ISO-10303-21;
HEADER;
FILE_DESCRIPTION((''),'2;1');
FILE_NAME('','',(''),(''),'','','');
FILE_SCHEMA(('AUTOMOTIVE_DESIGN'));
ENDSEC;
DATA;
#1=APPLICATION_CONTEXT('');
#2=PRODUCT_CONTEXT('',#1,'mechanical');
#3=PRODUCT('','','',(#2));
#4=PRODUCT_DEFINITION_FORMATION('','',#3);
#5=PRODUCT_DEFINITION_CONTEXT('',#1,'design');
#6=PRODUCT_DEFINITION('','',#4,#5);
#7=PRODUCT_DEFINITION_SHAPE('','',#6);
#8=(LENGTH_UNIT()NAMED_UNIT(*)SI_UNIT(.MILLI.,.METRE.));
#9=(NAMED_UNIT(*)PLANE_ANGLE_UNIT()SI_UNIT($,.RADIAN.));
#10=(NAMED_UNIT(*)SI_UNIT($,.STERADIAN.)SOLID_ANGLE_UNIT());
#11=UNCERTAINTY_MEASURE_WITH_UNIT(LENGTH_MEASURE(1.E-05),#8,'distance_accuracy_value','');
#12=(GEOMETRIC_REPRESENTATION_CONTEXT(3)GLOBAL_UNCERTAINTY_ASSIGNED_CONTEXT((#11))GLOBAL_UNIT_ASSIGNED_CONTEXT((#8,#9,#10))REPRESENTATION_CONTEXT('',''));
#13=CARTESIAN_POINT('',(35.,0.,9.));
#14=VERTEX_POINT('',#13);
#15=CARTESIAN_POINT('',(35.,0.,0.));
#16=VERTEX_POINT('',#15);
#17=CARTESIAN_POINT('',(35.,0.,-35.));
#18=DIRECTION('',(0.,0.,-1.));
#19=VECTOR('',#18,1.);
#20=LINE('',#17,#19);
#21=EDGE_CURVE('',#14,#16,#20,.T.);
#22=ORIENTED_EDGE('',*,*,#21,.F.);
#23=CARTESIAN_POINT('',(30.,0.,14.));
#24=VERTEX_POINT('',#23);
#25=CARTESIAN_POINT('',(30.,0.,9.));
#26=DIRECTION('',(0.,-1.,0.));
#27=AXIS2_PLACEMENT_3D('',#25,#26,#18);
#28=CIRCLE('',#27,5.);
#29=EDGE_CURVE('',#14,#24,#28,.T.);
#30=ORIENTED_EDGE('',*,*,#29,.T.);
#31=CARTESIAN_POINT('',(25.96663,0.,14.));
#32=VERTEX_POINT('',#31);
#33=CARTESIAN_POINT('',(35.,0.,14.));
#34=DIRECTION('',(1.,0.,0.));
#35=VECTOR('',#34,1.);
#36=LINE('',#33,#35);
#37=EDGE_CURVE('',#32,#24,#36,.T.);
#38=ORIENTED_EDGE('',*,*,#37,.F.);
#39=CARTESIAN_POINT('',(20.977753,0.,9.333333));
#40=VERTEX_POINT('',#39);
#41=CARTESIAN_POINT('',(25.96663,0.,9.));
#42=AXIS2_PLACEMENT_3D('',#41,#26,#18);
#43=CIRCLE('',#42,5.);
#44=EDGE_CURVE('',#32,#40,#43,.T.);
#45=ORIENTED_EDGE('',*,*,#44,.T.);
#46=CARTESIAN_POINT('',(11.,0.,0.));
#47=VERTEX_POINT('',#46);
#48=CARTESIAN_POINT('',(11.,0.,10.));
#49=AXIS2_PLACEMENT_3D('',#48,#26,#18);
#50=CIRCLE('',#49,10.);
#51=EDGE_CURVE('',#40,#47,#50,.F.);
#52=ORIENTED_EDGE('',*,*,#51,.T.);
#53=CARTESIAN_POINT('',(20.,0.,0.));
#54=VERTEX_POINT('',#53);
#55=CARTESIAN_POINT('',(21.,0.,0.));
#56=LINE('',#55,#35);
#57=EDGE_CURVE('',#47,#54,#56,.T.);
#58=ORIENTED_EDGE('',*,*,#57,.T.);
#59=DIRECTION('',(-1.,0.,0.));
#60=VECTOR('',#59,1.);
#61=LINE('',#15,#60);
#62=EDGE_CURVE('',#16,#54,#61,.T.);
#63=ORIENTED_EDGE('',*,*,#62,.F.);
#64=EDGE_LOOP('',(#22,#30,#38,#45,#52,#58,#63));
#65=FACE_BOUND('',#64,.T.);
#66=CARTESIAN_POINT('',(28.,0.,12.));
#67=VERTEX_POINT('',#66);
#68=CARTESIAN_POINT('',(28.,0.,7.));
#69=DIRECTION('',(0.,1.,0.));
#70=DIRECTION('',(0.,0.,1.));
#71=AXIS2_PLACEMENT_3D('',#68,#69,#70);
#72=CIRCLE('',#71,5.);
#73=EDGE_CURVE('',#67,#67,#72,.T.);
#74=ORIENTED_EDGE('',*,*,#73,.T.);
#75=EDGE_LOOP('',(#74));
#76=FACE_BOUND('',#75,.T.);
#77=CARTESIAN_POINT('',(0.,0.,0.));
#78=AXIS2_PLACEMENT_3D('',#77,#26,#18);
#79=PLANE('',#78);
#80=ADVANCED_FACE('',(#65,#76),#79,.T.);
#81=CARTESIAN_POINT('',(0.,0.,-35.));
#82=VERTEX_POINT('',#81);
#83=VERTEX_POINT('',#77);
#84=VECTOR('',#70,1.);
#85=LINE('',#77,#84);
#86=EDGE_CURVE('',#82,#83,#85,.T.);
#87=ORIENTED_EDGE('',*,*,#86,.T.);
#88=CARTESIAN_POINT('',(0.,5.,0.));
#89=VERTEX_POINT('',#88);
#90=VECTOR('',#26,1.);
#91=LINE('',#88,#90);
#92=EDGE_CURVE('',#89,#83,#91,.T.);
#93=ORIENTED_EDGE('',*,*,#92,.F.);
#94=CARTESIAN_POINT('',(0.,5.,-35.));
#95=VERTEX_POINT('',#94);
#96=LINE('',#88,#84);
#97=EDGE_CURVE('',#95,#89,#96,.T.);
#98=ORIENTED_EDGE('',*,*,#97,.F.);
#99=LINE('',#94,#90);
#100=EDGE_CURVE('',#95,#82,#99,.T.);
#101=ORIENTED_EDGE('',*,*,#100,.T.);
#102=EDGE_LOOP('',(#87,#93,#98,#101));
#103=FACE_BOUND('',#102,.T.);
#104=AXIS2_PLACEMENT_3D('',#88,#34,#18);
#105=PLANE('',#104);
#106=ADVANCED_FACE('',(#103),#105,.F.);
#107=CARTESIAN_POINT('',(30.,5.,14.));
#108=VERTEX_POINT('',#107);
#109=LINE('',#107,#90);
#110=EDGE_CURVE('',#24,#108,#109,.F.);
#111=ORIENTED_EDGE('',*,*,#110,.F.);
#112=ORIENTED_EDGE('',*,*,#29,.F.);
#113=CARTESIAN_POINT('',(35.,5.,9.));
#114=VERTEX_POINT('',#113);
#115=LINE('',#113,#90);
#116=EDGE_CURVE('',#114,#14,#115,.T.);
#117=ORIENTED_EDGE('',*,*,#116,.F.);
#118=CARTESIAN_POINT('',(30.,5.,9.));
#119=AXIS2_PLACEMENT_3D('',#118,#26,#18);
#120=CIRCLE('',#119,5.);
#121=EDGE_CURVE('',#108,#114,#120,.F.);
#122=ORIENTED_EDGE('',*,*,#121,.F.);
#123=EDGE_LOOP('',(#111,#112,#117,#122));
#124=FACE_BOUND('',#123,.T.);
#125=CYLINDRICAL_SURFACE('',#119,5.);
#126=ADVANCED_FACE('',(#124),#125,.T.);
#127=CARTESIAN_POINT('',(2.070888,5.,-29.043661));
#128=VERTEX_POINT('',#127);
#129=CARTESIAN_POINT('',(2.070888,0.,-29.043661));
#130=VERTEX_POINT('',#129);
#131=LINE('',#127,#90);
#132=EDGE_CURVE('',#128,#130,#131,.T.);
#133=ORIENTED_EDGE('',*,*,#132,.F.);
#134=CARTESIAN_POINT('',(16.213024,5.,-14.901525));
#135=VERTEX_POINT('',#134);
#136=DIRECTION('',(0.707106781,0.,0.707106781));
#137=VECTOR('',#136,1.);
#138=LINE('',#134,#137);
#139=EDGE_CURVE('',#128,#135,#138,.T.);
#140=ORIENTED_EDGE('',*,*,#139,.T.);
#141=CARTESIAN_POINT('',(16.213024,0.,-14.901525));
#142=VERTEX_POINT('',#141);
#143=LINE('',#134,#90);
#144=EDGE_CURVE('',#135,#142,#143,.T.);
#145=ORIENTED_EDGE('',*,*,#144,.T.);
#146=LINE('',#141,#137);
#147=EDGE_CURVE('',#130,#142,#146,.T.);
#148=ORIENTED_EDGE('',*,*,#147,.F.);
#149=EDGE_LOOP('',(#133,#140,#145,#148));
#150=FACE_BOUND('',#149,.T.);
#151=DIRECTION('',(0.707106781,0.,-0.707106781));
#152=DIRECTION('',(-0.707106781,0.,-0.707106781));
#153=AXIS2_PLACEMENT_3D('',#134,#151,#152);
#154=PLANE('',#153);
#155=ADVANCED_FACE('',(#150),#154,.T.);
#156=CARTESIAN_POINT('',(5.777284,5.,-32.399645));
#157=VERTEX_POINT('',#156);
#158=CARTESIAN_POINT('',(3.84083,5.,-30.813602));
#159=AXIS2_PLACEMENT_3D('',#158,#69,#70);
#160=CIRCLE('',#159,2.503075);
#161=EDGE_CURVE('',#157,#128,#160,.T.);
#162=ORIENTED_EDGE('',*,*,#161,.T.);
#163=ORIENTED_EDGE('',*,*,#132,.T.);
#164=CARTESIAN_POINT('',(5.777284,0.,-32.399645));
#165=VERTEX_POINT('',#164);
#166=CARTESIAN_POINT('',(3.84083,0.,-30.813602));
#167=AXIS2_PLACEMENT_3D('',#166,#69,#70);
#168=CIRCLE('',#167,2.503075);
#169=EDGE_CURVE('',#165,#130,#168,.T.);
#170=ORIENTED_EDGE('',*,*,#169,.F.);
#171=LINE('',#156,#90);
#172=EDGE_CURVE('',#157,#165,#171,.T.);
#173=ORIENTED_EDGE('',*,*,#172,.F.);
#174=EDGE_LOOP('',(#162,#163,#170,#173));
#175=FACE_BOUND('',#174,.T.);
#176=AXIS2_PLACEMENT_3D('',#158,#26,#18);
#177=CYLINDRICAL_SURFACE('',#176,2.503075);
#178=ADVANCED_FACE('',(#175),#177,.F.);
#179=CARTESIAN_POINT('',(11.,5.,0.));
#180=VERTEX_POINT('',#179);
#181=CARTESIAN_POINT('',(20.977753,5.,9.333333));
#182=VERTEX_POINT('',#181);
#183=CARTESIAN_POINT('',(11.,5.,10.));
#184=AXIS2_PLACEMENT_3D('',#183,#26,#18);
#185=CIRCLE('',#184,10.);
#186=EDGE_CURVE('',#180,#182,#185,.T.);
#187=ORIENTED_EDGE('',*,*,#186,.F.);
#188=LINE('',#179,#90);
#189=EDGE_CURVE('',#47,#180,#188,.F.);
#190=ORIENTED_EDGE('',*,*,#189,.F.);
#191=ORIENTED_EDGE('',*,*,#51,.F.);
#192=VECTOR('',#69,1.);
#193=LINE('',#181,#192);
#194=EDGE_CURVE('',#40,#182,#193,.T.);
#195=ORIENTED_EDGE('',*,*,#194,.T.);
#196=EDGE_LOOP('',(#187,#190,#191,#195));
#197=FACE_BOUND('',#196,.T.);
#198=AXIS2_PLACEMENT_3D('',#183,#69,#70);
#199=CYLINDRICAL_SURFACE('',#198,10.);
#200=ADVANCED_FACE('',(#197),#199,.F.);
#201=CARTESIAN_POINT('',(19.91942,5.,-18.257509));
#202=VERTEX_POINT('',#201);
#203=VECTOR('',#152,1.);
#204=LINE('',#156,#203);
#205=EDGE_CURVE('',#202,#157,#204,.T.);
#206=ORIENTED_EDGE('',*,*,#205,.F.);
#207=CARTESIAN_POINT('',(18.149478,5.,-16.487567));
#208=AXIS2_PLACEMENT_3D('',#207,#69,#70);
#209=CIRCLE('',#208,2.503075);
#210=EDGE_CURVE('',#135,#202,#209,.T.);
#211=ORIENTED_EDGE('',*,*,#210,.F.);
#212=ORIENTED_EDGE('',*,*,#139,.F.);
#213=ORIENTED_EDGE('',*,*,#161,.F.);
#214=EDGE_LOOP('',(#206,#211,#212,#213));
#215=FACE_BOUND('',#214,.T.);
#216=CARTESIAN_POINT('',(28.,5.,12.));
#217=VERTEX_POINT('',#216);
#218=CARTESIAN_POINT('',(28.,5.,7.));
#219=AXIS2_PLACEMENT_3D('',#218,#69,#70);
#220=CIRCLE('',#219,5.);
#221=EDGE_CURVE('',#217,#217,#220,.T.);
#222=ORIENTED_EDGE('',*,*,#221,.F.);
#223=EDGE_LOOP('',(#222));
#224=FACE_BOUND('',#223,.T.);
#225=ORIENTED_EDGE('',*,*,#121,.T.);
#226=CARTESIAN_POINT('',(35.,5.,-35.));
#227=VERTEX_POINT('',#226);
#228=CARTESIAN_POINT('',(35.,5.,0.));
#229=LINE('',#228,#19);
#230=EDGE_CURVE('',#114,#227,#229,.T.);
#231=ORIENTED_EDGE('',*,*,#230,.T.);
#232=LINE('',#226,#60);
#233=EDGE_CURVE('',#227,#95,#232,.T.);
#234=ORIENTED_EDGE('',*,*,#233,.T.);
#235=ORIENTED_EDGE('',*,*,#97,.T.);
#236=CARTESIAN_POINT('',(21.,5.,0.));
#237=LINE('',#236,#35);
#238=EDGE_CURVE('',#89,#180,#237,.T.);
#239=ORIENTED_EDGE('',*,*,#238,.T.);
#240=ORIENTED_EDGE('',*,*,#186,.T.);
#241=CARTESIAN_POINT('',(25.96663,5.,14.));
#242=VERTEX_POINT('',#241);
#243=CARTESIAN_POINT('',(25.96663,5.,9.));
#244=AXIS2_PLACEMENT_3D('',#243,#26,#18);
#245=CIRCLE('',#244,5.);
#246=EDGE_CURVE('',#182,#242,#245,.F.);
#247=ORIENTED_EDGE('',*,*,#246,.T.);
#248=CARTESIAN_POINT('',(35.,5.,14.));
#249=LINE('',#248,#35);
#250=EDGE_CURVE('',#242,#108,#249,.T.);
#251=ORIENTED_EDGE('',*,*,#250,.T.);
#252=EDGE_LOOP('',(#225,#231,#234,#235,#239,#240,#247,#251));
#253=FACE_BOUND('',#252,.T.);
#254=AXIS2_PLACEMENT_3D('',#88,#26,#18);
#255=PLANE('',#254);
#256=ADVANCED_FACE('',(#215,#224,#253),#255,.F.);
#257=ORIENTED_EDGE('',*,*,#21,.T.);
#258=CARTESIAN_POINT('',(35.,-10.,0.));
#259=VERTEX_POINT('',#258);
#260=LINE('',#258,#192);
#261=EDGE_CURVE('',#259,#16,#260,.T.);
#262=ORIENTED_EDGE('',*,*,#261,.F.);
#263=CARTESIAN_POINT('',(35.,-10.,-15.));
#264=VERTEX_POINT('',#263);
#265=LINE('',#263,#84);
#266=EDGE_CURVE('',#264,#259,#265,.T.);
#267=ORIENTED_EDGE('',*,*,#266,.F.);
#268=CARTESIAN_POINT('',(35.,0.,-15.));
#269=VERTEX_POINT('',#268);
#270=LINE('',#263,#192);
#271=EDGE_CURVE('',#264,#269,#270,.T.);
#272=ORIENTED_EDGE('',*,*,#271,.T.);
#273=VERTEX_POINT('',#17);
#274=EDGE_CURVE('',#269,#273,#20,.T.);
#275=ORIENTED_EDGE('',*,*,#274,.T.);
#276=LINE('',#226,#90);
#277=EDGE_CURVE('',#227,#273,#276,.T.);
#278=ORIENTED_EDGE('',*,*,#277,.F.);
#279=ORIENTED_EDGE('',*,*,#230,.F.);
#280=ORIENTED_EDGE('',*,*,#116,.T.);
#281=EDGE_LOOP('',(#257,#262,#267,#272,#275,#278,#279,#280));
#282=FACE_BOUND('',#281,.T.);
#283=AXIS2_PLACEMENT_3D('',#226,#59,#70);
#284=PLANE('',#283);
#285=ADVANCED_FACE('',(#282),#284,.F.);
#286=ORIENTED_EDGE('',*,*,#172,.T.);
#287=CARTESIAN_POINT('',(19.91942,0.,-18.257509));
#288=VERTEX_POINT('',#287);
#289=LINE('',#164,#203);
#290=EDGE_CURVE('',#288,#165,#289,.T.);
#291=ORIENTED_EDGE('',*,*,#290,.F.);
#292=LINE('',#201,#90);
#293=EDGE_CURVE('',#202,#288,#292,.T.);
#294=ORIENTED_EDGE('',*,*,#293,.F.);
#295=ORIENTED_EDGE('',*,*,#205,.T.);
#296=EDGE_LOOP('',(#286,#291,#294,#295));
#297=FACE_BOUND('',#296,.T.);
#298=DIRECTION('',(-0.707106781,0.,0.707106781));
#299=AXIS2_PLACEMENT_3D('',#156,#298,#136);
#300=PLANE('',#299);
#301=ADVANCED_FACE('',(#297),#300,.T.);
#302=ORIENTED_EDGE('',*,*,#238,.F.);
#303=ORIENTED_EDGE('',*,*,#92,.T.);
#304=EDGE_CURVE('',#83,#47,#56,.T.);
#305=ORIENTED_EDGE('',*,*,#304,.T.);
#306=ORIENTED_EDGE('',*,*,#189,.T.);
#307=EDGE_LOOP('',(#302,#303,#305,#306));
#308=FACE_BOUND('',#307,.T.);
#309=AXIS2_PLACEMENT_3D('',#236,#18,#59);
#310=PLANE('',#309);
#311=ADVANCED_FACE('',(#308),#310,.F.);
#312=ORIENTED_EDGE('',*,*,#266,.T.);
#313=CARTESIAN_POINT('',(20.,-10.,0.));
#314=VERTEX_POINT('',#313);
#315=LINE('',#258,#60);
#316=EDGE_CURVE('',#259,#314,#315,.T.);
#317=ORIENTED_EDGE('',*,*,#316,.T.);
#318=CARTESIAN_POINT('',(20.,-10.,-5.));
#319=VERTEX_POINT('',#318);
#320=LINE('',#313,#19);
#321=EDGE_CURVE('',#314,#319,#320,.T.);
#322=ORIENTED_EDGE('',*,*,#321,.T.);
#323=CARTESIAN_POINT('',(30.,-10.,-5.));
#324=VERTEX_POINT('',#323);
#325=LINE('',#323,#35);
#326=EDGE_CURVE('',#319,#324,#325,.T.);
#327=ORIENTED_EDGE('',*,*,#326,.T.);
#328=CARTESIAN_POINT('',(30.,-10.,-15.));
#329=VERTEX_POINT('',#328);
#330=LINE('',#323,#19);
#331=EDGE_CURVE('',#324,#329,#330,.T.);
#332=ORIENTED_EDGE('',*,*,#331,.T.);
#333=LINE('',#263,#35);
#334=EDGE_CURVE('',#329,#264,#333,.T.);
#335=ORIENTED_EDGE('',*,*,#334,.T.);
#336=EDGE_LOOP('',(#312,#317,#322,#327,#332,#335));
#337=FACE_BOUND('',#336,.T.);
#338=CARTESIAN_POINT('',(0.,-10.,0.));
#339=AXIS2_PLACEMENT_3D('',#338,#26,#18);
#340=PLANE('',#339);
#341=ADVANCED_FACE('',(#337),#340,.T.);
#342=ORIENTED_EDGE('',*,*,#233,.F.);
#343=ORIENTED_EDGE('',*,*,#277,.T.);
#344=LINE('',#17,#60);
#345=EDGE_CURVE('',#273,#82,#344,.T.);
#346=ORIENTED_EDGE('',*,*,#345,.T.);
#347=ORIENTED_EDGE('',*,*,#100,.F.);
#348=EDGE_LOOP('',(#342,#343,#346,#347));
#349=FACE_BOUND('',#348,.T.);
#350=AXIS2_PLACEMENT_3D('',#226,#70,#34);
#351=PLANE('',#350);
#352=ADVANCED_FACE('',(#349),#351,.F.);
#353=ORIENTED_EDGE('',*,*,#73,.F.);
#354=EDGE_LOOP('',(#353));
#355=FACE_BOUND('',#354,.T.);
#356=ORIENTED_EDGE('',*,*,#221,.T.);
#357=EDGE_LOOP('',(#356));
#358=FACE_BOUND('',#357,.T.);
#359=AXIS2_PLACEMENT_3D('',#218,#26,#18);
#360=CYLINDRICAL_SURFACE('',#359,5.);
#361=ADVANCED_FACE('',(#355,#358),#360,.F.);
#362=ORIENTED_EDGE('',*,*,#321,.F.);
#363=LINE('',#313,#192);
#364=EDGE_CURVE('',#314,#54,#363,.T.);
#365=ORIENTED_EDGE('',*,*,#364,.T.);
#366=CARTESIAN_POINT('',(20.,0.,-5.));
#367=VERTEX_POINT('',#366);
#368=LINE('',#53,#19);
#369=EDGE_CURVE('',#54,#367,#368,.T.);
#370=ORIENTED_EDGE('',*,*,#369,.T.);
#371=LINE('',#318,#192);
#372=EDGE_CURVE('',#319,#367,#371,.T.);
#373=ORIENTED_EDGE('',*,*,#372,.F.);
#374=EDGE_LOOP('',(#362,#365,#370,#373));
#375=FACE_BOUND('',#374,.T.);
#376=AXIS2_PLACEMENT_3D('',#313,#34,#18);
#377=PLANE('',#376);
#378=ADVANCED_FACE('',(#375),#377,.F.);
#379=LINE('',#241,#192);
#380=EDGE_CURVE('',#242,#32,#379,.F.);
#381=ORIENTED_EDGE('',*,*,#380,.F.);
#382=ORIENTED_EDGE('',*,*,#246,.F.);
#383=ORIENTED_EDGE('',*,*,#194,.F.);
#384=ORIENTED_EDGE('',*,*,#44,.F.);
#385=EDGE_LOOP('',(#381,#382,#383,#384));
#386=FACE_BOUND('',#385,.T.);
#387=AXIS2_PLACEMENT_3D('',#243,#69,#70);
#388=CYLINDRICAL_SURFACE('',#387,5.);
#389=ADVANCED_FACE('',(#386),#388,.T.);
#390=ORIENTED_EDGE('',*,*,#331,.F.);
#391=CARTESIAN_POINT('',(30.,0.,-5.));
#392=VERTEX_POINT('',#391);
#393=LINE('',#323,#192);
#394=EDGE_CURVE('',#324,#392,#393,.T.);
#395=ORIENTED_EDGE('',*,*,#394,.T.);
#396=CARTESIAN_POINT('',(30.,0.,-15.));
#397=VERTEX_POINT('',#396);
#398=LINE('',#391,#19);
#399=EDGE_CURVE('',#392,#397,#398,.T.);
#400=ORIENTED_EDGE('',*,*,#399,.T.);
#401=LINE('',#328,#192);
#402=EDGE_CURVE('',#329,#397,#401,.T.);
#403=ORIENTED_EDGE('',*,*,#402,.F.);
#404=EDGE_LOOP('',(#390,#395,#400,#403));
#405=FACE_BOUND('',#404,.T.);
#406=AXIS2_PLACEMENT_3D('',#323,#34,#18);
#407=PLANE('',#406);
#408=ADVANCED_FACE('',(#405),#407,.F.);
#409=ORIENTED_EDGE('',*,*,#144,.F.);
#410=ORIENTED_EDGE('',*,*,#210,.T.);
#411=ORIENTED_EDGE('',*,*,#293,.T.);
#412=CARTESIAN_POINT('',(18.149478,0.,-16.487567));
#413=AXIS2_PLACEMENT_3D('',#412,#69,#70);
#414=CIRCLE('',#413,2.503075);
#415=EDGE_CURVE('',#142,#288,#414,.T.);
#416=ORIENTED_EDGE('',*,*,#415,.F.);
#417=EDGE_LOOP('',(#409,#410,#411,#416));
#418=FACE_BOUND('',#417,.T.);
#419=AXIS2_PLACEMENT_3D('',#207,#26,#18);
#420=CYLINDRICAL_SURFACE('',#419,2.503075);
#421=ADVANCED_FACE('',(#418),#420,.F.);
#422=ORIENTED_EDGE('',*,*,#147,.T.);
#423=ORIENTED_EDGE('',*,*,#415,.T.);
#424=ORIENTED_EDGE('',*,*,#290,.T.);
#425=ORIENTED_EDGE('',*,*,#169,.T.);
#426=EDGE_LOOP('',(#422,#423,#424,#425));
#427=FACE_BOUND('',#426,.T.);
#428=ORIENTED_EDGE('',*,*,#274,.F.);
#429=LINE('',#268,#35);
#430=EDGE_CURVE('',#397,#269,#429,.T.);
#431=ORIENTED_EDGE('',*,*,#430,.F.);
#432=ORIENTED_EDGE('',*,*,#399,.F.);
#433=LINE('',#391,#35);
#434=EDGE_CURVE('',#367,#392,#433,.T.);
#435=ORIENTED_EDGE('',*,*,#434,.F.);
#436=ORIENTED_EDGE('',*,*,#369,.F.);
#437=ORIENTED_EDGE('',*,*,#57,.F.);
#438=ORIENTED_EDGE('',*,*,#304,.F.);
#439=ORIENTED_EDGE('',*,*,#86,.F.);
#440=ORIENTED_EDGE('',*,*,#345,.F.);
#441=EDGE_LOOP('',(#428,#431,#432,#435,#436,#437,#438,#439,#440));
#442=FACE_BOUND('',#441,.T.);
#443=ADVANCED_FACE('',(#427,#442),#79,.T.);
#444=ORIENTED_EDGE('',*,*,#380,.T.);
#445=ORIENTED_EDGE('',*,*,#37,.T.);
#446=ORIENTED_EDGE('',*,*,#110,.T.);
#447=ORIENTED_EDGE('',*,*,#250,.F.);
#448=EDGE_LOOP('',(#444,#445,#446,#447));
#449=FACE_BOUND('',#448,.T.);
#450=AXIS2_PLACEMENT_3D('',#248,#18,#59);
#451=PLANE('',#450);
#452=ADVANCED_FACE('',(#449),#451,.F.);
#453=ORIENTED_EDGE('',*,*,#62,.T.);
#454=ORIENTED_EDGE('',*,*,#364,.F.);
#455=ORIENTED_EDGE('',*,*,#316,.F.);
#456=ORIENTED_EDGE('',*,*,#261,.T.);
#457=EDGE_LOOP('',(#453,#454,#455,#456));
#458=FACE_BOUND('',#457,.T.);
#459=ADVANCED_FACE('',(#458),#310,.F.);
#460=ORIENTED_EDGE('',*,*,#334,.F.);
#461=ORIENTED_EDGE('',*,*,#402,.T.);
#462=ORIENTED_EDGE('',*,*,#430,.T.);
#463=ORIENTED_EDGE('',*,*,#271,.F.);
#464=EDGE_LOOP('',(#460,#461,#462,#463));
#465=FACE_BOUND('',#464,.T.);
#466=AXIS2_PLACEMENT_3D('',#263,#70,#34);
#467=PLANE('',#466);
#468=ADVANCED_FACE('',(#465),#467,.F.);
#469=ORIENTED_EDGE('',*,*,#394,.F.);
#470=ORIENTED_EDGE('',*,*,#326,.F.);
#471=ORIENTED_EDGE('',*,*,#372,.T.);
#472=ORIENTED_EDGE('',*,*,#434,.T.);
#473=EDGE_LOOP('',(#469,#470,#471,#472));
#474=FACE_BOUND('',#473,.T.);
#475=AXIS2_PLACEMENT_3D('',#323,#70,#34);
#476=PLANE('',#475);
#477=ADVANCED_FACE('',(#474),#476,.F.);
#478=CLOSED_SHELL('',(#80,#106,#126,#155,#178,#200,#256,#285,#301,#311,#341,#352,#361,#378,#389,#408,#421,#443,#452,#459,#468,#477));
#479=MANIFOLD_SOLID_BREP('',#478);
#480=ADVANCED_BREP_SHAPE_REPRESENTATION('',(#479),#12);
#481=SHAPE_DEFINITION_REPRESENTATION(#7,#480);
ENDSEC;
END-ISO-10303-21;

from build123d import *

# Parameters (mm, degrees)
SKETCH1_R           = 5
BOSS_EXTRUDE1_DEPTH = 5
BOSS_EXTRUDE2_DEPTH = 10
FILLET1_R           = 10
FILLET4_R           = 5


with BuildPart() as part:
    # Sketch1 → Boss-Extrude1 (new body)
    with BuildSketch(Plane(origin=(0, 0, 0), x_dir=(1, 0, 0), z_dir=(0, 1, 0))):
        Polygon((0, 0), (0, 35), (35, 35), (35, 0), (35, -14), (21, -14), (21, 0), align=None)
        with Locations(Location((28, -7, 0), (0, 0, 270))):
            Circle(SKETCH1_R, mode=Mode.SUBTRACT)
        with BuildLine():
            Line((5.77728435, 32.399644503), (19.919419974, 18.257508879))
            ThreePointArc((19.919419974, 18.257508879), (19.829534471, 14.632089471), (16.21302376, 14.901525103))
            Line((16.21302376, 14.901525103), (2.070888136, 29.043660727))
            ThreePointArc((2.070888136, 29.043660727), (2.160773638, 32.669080135), (5.77728435, 32.399644503))
        make_face(mode=Mode.SUBTRACT)
    extrude(amount=BOSS_EXTRUDE1_DEPTH)

    # Sketch2 → Boss-Extrude2 (add)
    with BuildSketch(Plane.XZ):
        Polygon((30, -5), (20, -5), (20, 0), (35, 0), (35, -15), (30, -15), align=None)
    extrude(amount=BOSS_EXTRUDE2_DEPTH)

    # Fillet1
    # the kernel refuses this fillet: 10 mm, written as the material it adds along each edge
    with BuildSketch(Plane(origin=(21, 0, 0), x_dir=(-1, 0, 0), z_dir=(0, 1, 0))) as fillet1_piece_1:
        with BuildLine():
            CenterArc((FILLET1_R, FILLET1_R), FILLET1_R, 180, 90)
            Line((0, FILLET1_R), (0, 0))
            Line((0, 0), (FILLET1_R, 0))
        make_face()
    extrude(amount=5)

    # Fillet4
    fillet4_edges = [part.edges().sort_by_distance(p)[0] for p in [
        (35, 2.5, 14),
        (21, 2.5, 14),
    ]]
    fillet(fillet4_edges, radius=FILLET4_R)


solid = part.part
